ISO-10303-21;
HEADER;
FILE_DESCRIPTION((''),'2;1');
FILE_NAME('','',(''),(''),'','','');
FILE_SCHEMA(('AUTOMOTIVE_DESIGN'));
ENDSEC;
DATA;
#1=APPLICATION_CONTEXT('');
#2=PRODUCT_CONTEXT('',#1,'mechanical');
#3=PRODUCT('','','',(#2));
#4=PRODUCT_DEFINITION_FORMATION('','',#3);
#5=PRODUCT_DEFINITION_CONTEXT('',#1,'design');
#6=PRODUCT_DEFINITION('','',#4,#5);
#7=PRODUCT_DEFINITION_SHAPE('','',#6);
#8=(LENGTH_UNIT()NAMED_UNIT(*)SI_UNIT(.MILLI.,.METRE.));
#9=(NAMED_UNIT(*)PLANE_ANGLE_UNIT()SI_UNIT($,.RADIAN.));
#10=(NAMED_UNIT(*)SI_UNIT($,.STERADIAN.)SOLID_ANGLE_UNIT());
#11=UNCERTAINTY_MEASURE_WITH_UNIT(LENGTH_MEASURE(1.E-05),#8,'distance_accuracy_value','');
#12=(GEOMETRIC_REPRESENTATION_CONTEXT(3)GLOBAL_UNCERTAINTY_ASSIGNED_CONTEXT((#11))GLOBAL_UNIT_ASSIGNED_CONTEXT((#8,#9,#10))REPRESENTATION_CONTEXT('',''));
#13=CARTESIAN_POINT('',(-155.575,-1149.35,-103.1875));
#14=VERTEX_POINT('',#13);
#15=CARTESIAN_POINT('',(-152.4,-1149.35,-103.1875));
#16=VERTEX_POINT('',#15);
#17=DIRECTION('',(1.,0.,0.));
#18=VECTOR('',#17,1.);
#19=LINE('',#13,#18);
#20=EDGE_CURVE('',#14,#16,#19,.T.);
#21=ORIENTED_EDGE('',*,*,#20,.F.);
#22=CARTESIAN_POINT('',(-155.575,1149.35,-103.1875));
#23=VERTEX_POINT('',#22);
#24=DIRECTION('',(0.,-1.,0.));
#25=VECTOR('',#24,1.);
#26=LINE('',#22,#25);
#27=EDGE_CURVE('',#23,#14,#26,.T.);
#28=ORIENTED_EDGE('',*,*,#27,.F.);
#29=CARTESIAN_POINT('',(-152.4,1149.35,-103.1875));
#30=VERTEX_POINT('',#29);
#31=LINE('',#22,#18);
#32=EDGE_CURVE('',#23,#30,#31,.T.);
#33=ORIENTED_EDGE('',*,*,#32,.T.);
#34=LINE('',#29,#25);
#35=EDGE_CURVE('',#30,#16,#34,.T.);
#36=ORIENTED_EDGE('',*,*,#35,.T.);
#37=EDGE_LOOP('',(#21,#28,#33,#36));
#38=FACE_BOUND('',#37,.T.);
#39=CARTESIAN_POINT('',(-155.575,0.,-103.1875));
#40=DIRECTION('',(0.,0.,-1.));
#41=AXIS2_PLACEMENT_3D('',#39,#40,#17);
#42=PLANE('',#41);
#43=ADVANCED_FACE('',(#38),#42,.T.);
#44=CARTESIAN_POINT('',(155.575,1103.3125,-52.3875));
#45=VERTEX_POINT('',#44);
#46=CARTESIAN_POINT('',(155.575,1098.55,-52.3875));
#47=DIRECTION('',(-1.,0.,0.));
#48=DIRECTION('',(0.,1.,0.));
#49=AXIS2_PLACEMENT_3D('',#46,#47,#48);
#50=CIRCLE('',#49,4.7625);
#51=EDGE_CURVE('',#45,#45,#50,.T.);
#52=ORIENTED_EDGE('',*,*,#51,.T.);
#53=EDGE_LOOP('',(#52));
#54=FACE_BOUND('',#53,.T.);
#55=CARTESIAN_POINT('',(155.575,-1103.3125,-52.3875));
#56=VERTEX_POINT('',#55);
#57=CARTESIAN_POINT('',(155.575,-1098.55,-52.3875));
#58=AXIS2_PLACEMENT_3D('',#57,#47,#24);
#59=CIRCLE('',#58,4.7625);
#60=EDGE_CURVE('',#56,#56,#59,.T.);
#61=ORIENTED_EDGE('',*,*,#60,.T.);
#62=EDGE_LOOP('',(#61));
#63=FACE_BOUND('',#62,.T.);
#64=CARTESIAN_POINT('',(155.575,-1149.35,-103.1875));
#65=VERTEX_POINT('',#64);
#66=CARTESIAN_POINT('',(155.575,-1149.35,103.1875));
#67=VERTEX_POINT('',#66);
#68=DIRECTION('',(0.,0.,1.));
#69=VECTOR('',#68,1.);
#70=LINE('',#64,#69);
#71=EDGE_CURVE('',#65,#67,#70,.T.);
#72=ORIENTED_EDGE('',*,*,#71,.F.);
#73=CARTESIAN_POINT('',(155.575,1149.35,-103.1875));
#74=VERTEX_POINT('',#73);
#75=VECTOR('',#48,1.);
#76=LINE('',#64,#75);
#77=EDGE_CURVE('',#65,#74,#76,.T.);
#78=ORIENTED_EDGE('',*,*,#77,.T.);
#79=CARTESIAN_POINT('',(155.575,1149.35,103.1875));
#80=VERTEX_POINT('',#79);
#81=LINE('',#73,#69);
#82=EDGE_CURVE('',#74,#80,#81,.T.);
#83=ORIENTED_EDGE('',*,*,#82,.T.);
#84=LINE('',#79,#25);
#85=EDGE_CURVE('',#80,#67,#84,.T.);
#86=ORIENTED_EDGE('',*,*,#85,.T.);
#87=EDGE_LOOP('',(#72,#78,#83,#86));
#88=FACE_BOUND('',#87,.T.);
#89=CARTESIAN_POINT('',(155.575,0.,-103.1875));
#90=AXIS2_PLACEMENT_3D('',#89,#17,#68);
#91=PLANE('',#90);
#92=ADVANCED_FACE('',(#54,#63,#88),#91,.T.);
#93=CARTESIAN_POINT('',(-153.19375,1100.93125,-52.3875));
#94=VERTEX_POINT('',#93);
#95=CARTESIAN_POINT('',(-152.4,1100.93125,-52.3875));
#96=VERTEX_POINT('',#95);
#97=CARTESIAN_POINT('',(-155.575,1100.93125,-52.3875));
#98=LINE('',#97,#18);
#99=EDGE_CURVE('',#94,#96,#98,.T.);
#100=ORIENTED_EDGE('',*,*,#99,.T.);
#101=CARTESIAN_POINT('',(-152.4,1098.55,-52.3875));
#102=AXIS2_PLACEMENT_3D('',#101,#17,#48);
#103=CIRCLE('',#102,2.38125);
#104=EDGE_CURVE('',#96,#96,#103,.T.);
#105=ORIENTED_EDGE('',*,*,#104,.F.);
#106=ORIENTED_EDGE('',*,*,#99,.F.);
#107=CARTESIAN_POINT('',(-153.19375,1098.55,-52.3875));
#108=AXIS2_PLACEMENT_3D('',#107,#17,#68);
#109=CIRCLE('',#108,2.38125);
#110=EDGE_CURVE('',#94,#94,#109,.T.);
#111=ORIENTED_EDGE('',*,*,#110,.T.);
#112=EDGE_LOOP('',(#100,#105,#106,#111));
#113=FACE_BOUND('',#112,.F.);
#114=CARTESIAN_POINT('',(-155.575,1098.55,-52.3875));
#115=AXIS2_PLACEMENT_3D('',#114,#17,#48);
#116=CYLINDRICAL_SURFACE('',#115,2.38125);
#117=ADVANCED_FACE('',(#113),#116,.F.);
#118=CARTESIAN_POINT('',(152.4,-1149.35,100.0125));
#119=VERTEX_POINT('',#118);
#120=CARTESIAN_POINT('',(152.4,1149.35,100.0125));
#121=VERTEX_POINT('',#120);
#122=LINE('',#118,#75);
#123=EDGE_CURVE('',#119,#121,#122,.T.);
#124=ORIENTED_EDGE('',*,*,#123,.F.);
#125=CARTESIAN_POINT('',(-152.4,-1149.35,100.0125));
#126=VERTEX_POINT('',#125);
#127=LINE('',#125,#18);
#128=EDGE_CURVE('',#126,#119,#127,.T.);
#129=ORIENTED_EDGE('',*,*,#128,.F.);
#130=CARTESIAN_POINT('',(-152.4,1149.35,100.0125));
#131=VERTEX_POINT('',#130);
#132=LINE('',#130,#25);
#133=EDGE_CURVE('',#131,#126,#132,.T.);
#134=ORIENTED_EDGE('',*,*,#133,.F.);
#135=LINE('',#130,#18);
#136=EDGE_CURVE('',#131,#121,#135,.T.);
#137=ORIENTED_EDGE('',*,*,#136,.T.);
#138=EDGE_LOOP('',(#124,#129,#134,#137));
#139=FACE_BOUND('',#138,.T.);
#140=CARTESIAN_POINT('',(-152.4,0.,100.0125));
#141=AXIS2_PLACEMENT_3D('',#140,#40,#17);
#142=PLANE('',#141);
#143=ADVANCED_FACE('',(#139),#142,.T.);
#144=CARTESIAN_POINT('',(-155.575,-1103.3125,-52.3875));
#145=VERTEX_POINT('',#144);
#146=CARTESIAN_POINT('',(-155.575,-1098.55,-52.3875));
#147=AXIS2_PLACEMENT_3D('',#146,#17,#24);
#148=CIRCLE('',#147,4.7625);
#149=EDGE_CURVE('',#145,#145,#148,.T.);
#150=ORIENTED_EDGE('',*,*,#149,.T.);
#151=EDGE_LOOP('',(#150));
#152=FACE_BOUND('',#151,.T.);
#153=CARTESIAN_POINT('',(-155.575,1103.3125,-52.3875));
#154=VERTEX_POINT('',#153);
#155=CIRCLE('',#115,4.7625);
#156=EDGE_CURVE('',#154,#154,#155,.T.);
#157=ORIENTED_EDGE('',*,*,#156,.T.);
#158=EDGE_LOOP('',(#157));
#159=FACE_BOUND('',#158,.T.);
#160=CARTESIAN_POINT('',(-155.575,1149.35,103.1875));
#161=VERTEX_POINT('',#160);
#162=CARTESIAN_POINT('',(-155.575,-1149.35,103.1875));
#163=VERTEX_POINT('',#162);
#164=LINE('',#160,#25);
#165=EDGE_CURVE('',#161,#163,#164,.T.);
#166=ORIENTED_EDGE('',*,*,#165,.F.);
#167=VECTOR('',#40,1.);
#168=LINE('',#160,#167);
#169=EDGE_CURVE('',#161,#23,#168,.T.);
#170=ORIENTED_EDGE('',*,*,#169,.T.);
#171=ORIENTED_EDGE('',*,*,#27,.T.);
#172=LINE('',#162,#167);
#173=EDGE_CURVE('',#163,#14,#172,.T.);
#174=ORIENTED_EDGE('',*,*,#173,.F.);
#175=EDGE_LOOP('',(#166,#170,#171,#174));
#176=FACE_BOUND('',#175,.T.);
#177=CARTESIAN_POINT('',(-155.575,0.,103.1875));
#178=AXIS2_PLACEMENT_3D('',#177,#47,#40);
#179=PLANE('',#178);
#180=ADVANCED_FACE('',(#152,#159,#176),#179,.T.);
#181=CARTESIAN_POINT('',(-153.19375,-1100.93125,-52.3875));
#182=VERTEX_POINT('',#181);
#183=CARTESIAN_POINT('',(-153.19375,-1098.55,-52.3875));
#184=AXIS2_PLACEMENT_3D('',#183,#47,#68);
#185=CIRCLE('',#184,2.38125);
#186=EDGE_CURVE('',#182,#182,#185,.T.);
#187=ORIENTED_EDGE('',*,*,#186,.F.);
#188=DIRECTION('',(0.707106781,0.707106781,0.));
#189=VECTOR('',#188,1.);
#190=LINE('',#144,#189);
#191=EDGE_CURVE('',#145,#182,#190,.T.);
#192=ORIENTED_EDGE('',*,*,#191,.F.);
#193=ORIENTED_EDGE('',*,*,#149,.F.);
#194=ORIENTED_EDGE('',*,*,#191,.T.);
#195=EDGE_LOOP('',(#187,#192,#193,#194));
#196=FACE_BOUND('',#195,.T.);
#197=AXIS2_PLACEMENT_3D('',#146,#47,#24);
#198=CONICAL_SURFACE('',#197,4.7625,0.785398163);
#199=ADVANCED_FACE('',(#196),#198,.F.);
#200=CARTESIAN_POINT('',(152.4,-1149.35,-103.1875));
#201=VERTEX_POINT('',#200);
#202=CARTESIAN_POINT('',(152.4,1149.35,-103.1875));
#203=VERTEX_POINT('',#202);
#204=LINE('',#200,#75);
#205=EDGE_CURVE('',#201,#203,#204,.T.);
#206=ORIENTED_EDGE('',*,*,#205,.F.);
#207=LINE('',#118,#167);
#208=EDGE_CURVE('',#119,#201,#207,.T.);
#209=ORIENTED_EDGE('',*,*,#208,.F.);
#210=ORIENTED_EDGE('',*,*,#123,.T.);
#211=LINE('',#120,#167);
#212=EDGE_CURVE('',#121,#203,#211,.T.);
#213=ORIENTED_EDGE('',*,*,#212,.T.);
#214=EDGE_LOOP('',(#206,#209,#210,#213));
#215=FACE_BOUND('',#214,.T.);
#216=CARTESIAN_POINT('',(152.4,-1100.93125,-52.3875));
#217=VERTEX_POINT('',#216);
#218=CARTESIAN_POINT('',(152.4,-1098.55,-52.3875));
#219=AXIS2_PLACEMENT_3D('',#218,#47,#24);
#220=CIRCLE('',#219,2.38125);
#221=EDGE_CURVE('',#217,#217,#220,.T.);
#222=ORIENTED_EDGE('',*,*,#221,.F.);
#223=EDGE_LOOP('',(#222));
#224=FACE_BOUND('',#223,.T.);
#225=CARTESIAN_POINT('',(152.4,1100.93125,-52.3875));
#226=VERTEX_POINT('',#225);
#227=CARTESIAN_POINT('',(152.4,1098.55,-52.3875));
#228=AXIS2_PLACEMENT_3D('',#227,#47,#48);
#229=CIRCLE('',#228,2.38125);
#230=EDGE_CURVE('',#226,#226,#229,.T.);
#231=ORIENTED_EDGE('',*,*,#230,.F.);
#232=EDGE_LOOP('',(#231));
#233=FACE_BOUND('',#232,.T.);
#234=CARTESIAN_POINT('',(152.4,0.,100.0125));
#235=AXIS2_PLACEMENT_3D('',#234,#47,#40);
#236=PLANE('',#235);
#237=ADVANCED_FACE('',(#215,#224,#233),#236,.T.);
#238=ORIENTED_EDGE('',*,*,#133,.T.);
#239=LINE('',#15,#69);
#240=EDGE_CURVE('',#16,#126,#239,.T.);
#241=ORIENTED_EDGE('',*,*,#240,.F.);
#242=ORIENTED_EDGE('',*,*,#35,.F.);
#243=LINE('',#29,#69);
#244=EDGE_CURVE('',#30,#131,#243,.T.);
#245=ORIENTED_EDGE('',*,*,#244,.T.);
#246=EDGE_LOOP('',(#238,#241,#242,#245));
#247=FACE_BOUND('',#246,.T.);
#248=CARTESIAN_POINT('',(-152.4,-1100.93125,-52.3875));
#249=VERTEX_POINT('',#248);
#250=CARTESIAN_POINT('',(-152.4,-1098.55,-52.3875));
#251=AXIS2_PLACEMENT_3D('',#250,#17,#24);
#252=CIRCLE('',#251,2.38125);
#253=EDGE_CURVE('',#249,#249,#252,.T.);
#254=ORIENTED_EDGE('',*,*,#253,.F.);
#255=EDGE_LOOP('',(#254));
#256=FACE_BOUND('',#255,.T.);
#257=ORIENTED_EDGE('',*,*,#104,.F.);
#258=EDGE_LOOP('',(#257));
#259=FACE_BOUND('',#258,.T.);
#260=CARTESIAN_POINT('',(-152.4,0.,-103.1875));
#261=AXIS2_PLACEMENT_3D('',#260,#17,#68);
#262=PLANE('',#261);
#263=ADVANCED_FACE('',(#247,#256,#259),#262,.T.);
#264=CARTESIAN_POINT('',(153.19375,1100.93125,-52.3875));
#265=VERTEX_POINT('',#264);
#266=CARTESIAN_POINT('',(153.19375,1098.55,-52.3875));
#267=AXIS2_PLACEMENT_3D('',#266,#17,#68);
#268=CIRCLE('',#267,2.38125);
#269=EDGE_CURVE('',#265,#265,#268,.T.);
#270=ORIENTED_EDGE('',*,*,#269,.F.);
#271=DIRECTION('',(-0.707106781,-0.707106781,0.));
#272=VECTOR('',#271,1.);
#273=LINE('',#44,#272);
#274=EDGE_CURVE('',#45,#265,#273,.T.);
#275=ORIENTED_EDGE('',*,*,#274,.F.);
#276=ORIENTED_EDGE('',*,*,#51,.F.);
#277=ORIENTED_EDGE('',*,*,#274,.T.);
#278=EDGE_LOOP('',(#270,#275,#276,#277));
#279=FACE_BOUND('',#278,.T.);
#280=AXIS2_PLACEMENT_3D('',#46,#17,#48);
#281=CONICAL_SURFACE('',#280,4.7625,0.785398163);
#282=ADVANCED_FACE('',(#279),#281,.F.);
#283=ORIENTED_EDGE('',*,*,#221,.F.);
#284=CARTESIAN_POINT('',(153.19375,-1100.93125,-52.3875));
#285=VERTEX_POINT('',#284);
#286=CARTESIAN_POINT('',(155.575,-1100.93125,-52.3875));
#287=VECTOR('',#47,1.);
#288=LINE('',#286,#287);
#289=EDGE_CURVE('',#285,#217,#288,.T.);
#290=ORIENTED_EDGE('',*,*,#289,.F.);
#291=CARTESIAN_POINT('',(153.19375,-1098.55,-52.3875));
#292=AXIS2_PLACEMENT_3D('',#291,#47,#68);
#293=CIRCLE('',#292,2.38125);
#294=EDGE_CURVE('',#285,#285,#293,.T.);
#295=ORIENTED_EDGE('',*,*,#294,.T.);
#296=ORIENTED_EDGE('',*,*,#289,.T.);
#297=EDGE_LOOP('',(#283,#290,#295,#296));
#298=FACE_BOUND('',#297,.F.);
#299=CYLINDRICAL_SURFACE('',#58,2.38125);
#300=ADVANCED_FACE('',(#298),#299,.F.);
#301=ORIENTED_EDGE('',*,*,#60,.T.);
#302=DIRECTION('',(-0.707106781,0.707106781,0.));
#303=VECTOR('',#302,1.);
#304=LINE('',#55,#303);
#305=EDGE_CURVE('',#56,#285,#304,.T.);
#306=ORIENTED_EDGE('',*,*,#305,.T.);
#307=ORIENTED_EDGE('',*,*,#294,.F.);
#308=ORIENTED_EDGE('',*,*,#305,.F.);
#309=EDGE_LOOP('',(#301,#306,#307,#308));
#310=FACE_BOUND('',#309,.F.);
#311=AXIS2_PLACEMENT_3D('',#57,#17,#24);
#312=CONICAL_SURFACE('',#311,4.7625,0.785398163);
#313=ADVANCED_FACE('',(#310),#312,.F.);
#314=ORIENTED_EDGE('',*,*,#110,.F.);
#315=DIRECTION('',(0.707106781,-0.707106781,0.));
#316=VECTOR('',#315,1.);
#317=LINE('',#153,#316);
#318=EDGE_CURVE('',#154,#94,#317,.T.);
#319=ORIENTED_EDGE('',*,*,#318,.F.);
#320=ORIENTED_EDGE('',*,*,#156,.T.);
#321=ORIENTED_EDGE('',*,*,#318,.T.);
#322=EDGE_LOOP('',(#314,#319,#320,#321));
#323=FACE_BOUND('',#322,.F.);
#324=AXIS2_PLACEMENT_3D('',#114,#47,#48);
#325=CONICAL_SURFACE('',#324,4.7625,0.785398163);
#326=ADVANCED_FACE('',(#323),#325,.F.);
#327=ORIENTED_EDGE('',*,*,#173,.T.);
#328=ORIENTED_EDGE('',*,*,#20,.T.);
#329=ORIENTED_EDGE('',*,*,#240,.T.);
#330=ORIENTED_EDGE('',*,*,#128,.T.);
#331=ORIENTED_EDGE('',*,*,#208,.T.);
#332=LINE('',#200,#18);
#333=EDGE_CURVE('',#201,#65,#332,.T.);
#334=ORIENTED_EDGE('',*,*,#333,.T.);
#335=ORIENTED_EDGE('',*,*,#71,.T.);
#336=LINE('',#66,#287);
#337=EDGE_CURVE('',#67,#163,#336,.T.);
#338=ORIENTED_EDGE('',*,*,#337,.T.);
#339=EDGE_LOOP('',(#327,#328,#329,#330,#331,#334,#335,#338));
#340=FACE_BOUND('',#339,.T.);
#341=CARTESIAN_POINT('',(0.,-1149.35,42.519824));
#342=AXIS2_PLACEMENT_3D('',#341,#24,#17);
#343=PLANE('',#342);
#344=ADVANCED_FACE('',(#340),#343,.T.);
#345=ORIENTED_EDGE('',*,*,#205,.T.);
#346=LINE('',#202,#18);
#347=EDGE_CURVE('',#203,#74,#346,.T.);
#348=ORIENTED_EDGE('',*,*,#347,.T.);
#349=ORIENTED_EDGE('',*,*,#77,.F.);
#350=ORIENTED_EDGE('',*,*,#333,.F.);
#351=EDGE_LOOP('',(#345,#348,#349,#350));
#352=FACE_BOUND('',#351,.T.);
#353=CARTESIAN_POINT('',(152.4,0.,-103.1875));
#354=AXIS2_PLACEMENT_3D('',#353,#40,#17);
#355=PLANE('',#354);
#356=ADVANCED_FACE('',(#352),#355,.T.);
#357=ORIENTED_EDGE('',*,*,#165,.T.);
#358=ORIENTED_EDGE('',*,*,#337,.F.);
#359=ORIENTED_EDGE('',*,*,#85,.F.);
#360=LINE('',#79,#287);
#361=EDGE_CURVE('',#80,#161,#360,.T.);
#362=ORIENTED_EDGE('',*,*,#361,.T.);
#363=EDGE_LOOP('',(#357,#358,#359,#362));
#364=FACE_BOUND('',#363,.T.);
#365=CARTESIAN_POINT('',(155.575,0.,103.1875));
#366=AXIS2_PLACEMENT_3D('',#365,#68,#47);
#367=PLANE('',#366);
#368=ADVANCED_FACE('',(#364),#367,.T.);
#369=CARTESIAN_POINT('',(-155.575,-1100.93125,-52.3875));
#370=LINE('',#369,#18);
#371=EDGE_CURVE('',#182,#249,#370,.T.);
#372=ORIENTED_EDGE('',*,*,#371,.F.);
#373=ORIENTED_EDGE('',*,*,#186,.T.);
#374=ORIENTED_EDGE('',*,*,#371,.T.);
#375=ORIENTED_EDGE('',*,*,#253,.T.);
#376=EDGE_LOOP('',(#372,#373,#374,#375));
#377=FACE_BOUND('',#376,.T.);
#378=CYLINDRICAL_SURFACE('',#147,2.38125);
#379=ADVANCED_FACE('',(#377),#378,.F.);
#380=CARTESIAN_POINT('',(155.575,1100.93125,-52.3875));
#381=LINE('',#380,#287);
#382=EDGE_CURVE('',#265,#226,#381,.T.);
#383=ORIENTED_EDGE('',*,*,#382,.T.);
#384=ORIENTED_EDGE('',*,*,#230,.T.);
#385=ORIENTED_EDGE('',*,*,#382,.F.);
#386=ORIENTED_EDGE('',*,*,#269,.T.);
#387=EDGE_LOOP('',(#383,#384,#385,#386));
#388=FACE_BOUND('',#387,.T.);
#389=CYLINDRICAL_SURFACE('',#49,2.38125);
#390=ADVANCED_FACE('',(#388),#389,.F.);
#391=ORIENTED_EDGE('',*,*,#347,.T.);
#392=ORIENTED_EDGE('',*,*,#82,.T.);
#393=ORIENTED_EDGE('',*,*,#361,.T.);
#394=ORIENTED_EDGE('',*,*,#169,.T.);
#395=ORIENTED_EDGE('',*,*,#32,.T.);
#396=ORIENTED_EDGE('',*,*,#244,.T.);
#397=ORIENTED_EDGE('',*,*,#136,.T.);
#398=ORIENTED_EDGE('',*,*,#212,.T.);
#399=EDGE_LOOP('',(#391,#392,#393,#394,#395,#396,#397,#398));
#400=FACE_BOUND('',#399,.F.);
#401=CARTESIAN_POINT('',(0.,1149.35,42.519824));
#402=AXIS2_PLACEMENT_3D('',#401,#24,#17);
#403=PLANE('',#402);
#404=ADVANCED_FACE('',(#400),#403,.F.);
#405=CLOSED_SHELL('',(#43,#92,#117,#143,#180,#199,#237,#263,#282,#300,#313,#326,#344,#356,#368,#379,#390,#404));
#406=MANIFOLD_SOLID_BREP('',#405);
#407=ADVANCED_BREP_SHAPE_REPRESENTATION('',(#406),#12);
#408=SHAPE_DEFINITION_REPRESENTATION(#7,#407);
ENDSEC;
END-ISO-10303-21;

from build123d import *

# Parameters (mm, degrees)
F1_DEPTH         = 1149.35
F3_D             = 4.7625
F3_DEPTH         = 25.4
F3_CSINK_D       = 9.525
F3_CSINK_ANGLE   = 90
F3_TIP           = 1.4307993491
F3_COPIES2_COUNT = 2


# Not quite as in the source:
# - a pattern or mirror of a feature is missing from the dataset's text; its kind, count and spacing are read off the source's solid


with BuildPart() as f1:
    # F0 (on Front) → F1 (new body, symmetric)
    with BuildSketch(Plane.XZ):
        Polygon((155.575, -103.1875), (155.575, 103.1875), (-155.575, 103.1875), (-155.575, -103.1875), (-152.4, -103.1875), (-152.4, 100.0125), (152.4, 100.0125), (152.4, -103.1875), align=None)
    extrude(amount=F1_DEPTH, both=True)

    # F3
    with Locations(Plane.YZ.offset(155.575)):
        with Locations((-1098.55, -52.3875)):
            f3 = CounterSinkHole(F3_D / 2, F3_CSINK_D / 2, depth=F3_DEPTH, counter_sink_angle=F3_CSINK_ANGLE)
            with Locations((0, 0, -(F3_DEPTH + F3_TIP / 2))):  # 118° drill point
                Cone(0, F3_D / 2, F3_TIP, mode=Mode.SUBTRACT)

    # F3_copies: F3 across plane
    add(f3.mirror(Plane(origin=(0, 0, 0), x_dir=(0, 0, -1), z_dir=(-1, 0, 0))), mode=Mode.SUBTRACT)

    # F3_copies1: F3 across plane
    add(f3.mirror(Plane.ZX), mode=Mode.SUBTRACT)

    # F3_copies2: F3 ×2 about axis
    f3_copies2_axis = Axis((0, 0, 0), (0, 0, 1))
    for i in range(1, F3_COPIES2_COUNT):
        add(f3.rotate(f3_copies2_axis, i * 360 / F3_COPIES2_COUNT), mode=Mode.SUBTRACT)


solid = f1.part
